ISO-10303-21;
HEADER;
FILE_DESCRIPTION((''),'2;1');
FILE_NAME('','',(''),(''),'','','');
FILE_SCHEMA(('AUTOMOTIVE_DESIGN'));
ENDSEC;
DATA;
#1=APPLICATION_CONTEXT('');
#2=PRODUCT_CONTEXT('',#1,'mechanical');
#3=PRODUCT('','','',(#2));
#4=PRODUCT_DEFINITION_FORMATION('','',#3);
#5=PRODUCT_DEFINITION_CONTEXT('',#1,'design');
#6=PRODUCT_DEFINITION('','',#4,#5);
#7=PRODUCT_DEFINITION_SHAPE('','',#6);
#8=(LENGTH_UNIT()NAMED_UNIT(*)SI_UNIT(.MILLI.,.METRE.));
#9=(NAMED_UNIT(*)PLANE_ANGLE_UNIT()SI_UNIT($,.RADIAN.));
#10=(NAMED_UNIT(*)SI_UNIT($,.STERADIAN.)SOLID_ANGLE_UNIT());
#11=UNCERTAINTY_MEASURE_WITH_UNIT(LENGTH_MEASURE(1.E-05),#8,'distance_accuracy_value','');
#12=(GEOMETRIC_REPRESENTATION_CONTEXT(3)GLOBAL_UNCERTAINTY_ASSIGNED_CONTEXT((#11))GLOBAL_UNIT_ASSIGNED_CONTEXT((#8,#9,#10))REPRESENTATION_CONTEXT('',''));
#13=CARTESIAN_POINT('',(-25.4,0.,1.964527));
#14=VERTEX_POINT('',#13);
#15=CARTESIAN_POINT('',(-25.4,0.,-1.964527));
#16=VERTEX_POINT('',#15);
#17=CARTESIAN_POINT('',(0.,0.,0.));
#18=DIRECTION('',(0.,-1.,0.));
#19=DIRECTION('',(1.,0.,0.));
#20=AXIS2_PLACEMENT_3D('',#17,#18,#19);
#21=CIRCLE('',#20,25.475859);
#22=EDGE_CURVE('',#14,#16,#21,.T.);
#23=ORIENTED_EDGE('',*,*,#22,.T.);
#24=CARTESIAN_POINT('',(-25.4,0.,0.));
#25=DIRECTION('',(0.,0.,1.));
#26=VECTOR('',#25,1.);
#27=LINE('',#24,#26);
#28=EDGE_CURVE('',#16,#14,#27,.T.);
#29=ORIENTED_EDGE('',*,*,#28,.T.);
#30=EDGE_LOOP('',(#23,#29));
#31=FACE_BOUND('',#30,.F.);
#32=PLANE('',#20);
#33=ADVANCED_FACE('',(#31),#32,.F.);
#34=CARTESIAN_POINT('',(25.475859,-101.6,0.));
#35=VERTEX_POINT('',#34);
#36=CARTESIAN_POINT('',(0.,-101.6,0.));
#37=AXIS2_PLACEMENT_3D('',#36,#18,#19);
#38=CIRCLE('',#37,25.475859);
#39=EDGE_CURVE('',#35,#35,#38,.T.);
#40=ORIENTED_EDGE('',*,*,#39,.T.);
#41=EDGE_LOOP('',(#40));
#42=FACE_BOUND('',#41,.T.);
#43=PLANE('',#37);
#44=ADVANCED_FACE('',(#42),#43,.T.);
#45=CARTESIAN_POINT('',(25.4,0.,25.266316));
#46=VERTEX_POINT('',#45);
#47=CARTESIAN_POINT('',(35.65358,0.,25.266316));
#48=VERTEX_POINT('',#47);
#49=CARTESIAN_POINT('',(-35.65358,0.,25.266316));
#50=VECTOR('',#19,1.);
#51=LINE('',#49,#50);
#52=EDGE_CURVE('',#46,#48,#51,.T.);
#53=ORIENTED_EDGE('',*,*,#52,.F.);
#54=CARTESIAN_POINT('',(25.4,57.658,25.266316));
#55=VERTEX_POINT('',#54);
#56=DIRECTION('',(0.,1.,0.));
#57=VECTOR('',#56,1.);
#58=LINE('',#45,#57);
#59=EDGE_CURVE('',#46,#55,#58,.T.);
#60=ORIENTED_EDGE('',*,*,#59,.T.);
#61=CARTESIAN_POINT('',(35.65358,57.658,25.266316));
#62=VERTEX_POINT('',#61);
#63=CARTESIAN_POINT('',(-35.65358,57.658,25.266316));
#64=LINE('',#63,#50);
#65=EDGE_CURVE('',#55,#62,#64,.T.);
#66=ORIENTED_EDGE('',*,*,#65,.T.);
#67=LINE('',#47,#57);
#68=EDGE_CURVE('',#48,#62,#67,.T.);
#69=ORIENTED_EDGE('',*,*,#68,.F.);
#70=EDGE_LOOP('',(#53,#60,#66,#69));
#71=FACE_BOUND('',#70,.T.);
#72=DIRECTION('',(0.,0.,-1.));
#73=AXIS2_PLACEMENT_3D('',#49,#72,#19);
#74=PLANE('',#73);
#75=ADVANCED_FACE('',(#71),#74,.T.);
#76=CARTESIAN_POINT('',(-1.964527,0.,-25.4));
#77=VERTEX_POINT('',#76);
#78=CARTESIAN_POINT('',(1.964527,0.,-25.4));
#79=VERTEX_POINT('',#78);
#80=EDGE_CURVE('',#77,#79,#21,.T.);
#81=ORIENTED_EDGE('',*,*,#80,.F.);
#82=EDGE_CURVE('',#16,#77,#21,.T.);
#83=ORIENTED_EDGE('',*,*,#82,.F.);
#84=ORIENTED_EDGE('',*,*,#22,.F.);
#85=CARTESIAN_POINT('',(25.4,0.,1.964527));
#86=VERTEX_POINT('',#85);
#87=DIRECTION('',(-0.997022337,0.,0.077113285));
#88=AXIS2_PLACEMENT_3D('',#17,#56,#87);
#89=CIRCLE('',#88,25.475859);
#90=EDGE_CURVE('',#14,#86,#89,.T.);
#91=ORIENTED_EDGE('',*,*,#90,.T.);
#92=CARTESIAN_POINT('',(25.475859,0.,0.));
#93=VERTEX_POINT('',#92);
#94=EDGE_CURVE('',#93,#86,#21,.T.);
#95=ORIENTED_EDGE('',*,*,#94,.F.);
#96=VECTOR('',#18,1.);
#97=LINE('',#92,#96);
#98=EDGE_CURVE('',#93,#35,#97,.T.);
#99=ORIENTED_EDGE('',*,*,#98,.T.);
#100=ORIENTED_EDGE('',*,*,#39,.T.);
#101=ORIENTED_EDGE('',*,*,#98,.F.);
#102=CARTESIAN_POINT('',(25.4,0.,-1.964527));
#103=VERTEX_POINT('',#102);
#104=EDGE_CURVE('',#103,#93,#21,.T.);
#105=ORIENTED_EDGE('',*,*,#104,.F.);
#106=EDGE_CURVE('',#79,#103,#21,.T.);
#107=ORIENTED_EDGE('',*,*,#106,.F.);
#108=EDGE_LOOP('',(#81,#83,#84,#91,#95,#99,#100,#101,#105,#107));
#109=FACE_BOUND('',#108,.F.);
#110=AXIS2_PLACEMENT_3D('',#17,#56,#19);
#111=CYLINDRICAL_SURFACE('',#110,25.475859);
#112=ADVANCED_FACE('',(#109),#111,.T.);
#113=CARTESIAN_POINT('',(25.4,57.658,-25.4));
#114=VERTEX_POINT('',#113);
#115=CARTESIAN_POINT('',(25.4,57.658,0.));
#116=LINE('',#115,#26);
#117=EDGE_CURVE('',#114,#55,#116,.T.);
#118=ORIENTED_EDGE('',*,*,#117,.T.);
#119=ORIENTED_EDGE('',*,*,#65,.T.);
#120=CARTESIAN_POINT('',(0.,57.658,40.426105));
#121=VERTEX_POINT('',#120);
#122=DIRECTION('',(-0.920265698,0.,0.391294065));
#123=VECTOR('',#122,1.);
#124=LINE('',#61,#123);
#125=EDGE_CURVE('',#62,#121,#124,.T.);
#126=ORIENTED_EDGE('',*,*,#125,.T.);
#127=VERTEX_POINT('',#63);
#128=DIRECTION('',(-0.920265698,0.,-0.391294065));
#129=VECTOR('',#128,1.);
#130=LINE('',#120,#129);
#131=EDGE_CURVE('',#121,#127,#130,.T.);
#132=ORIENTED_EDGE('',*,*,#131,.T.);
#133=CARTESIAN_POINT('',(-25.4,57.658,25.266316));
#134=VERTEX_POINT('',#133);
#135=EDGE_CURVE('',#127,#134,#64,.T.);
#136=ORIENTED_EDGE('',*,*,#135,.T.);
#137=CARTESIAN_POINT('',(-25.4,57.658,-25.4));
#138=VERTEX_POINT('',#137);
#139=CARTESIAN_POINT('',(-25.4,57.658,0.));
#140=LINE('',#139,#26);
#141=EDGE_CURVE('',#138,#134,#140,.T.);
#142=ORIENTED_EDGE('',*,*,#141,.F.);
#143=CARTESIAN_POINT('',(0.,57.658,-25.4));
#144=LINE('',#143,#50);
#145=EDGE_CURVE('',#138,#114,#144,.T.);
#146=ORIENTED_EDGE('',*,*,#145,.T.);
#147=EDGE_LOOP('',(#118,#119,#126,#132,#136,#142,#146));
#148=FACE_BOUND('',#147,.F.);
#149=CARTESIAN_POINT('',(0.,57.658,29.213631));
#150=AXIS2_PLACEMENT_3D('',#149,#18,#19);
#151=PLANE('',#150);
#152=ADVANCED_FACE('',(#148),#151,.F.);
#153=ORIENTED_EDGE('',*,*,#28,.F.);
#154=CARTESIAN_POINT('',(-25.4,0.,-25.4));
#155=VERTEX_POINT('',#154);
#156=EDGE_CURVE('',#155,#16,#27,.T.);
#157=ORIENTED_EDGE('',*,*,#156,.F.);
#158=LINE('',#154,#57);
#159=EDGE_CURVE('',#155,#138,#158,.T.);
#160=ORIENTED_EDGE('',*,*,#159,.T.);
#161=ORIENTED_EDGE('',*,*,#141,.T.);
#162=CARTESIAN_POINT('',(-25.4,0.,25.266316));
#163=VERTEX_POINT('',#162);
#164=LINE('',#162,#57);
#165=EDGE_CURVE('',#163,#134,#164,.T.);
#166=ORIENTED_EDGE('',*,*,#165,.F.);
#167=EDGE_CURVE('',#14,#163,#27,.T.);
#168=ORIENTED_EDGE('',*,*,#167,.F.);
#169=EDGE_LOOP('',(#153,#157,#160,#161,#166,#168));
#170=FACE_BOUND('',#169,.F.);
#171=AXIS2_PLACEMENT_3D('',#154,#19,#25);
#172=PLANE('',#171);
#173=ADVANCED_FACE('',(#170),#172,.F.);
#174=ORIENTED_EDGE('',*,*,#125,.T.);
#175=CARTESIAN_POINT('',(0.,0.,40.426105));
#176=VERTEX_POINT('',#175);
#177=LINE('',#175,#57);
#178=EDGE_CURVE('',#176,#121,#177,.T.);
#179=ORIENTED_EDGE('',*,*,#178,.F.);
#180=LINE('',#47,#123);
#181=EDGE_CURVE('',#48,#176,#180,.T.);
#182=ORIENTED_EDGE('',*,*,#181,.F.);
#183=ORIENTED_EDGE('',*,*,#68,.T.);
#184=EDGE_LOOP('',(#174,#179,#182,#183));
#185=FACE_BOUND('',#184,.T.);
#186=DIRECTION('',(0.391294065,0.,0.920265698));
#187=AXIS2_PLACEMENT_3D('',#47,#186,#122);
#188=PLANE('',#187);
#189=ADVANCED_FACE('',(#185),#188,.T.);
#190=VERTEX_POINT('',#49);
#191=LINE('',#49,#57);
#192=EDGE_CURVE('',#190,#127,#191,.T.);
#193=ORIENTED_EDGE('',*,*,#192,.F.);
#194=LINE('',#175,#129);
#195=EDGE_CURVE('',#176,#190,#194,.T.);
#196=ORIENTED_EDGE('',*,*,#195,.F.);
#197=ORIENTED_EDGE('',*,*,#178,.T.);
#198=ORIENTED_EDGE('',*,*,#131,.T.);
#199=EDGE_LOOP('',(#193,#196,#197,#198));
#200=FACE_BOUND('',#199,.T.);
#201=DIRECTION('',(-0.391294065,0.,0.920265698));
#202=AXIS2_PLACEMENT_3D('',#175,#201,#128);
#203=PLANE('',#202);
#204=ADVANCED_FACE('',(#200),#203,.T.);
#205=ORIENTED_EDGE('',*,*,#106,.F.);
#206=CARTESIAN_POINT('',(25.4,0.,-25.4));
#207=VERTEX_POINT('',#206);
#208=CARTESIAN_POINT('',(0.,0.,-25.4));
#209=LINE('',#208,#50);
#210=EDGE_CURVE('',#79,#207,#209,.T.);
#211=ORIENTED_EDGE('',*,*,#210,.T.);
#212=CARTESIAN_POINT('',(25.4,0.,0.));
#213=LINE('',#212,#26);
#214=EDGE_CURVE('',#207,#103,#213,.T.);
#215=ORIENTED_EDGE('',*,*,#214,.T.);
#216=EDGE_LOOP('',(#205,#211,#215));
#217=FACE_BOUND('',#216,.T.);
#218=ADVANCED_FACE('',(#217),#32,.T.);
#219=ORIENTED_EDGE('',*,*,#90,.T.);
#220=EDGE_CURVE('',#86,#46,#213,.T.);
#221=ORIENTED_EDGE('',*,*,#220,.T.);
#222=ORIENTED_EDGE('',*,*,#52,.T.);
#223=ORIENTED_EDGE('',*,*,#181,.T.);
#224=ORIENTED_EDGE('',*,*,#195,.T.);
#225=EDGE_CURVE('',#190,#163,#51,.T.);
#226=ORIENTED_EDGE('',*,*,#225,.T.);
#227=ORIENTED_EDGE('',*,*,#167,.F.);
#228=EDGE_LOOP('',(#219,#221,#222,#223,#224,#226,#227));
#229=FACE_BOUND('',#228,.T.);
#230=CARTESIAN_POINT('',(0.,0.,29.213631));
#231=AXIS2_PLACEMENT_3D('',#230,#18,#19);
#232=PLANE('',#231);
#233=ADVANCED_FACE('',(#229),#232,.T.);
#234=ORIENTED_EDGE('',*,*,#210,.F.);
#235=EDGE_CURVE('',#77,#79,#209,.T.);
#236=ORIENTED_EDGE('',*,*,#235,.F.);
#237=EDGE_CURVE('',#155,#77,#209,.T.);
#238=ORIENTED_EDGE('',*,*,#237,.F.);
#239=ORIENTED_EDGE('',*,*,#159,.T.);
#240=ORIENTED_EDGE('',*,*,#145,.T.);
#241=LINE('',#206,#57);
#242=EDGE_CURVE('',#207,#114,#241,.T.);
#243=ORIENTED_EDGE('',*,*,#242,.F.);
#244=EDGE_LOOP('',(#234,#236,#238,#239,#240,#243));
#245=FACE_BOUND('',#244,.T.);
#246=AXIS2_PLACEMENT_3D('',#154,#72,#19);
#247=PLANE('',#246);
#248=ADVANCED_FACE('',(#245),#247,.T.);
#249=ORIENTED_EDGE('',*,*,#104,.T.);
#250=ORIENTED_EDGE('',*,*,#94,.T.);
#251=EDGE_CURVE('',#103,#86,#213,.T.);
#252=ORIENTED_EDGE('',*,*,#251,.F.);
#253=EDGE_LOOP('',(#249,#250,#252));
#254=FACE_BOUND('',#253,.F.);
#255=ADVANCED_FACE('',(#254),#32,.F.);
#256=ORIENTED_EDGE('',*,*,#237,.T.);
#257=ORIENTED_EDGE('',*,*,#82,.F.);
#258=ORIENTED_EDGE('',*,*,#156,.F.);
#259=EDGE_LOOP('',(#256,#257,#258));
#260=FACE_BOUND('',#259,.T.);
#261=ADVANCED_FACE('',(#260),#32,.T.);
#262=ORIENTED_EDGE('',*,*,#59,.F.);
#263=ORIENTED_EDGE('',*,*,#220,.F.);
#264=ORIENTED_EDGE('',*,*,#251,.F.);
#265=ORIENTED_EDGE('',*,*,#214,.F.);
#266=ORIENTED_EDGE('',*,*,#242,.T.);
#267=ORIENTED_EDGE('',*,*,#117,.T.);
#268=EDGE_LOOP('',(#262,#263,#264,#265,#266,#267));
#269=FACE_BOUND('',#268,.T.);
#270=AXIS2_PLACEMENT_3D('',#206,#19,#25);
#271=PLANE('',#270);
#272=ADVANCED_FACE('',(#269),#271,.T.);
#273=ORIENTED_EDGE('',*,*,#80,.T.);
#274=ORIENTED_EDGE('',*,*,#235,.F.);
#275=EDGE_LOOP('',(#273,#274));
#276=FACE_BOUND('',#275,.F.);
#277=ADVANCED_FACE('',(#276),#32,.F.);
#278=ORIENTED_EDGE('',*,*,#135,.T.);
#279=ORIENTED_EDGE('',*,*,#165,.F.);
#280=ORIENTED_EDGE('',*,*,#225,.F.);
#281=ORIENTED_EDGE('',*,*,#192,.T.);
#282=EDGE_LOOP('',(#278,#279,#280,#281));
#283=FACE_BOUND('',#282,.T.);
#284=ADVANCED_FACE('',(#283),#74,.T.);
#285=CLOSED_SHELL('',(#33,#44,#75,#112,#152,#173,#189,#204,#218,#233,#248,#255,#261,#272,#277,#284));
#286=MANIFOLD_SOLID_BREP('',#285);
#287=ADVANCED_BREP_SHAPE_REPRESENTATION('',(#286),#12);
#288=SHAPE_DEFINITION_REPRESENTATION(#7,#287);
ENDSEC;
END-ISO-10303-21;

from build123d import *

# Parameters (mm, degrees)
F0_R     = 25.4758585114
F1_DEPTH = 101.6
F3_W     = 50.8
F3_H     = 50.8
F4_DEPTH = 57.658
F6_DEPTH = 57.658


# Not quite as in the source:
# - the program builds the solid bodies; features that only make, move or delete a surface that nothing else refers to are left out


with BuildPart() as f1:
    # F0 (on Front) → F1 (new body)
    with BuildSketch(Plane.XZ):
        Circle(F0_R)
    extrude(amount=F1_DEPTH)

    # F3 (on Front) → F4 (join)
    with BuildSketch(Plane.XZ):
        Rectangle(F3_W, F3_H)
    extrude(amount=-F4_DEPTH)

    # F5 (on Front) → F6 (join)
    with BuildSketch(Plane.XZ):
        Polygon((35.6535799801, 25.266315788), (0, 40.4261052608), (-35.6535799801, 25.266315788), align=None)
    extrude(amount=-F6_DEPTH)


solid = f1.part
